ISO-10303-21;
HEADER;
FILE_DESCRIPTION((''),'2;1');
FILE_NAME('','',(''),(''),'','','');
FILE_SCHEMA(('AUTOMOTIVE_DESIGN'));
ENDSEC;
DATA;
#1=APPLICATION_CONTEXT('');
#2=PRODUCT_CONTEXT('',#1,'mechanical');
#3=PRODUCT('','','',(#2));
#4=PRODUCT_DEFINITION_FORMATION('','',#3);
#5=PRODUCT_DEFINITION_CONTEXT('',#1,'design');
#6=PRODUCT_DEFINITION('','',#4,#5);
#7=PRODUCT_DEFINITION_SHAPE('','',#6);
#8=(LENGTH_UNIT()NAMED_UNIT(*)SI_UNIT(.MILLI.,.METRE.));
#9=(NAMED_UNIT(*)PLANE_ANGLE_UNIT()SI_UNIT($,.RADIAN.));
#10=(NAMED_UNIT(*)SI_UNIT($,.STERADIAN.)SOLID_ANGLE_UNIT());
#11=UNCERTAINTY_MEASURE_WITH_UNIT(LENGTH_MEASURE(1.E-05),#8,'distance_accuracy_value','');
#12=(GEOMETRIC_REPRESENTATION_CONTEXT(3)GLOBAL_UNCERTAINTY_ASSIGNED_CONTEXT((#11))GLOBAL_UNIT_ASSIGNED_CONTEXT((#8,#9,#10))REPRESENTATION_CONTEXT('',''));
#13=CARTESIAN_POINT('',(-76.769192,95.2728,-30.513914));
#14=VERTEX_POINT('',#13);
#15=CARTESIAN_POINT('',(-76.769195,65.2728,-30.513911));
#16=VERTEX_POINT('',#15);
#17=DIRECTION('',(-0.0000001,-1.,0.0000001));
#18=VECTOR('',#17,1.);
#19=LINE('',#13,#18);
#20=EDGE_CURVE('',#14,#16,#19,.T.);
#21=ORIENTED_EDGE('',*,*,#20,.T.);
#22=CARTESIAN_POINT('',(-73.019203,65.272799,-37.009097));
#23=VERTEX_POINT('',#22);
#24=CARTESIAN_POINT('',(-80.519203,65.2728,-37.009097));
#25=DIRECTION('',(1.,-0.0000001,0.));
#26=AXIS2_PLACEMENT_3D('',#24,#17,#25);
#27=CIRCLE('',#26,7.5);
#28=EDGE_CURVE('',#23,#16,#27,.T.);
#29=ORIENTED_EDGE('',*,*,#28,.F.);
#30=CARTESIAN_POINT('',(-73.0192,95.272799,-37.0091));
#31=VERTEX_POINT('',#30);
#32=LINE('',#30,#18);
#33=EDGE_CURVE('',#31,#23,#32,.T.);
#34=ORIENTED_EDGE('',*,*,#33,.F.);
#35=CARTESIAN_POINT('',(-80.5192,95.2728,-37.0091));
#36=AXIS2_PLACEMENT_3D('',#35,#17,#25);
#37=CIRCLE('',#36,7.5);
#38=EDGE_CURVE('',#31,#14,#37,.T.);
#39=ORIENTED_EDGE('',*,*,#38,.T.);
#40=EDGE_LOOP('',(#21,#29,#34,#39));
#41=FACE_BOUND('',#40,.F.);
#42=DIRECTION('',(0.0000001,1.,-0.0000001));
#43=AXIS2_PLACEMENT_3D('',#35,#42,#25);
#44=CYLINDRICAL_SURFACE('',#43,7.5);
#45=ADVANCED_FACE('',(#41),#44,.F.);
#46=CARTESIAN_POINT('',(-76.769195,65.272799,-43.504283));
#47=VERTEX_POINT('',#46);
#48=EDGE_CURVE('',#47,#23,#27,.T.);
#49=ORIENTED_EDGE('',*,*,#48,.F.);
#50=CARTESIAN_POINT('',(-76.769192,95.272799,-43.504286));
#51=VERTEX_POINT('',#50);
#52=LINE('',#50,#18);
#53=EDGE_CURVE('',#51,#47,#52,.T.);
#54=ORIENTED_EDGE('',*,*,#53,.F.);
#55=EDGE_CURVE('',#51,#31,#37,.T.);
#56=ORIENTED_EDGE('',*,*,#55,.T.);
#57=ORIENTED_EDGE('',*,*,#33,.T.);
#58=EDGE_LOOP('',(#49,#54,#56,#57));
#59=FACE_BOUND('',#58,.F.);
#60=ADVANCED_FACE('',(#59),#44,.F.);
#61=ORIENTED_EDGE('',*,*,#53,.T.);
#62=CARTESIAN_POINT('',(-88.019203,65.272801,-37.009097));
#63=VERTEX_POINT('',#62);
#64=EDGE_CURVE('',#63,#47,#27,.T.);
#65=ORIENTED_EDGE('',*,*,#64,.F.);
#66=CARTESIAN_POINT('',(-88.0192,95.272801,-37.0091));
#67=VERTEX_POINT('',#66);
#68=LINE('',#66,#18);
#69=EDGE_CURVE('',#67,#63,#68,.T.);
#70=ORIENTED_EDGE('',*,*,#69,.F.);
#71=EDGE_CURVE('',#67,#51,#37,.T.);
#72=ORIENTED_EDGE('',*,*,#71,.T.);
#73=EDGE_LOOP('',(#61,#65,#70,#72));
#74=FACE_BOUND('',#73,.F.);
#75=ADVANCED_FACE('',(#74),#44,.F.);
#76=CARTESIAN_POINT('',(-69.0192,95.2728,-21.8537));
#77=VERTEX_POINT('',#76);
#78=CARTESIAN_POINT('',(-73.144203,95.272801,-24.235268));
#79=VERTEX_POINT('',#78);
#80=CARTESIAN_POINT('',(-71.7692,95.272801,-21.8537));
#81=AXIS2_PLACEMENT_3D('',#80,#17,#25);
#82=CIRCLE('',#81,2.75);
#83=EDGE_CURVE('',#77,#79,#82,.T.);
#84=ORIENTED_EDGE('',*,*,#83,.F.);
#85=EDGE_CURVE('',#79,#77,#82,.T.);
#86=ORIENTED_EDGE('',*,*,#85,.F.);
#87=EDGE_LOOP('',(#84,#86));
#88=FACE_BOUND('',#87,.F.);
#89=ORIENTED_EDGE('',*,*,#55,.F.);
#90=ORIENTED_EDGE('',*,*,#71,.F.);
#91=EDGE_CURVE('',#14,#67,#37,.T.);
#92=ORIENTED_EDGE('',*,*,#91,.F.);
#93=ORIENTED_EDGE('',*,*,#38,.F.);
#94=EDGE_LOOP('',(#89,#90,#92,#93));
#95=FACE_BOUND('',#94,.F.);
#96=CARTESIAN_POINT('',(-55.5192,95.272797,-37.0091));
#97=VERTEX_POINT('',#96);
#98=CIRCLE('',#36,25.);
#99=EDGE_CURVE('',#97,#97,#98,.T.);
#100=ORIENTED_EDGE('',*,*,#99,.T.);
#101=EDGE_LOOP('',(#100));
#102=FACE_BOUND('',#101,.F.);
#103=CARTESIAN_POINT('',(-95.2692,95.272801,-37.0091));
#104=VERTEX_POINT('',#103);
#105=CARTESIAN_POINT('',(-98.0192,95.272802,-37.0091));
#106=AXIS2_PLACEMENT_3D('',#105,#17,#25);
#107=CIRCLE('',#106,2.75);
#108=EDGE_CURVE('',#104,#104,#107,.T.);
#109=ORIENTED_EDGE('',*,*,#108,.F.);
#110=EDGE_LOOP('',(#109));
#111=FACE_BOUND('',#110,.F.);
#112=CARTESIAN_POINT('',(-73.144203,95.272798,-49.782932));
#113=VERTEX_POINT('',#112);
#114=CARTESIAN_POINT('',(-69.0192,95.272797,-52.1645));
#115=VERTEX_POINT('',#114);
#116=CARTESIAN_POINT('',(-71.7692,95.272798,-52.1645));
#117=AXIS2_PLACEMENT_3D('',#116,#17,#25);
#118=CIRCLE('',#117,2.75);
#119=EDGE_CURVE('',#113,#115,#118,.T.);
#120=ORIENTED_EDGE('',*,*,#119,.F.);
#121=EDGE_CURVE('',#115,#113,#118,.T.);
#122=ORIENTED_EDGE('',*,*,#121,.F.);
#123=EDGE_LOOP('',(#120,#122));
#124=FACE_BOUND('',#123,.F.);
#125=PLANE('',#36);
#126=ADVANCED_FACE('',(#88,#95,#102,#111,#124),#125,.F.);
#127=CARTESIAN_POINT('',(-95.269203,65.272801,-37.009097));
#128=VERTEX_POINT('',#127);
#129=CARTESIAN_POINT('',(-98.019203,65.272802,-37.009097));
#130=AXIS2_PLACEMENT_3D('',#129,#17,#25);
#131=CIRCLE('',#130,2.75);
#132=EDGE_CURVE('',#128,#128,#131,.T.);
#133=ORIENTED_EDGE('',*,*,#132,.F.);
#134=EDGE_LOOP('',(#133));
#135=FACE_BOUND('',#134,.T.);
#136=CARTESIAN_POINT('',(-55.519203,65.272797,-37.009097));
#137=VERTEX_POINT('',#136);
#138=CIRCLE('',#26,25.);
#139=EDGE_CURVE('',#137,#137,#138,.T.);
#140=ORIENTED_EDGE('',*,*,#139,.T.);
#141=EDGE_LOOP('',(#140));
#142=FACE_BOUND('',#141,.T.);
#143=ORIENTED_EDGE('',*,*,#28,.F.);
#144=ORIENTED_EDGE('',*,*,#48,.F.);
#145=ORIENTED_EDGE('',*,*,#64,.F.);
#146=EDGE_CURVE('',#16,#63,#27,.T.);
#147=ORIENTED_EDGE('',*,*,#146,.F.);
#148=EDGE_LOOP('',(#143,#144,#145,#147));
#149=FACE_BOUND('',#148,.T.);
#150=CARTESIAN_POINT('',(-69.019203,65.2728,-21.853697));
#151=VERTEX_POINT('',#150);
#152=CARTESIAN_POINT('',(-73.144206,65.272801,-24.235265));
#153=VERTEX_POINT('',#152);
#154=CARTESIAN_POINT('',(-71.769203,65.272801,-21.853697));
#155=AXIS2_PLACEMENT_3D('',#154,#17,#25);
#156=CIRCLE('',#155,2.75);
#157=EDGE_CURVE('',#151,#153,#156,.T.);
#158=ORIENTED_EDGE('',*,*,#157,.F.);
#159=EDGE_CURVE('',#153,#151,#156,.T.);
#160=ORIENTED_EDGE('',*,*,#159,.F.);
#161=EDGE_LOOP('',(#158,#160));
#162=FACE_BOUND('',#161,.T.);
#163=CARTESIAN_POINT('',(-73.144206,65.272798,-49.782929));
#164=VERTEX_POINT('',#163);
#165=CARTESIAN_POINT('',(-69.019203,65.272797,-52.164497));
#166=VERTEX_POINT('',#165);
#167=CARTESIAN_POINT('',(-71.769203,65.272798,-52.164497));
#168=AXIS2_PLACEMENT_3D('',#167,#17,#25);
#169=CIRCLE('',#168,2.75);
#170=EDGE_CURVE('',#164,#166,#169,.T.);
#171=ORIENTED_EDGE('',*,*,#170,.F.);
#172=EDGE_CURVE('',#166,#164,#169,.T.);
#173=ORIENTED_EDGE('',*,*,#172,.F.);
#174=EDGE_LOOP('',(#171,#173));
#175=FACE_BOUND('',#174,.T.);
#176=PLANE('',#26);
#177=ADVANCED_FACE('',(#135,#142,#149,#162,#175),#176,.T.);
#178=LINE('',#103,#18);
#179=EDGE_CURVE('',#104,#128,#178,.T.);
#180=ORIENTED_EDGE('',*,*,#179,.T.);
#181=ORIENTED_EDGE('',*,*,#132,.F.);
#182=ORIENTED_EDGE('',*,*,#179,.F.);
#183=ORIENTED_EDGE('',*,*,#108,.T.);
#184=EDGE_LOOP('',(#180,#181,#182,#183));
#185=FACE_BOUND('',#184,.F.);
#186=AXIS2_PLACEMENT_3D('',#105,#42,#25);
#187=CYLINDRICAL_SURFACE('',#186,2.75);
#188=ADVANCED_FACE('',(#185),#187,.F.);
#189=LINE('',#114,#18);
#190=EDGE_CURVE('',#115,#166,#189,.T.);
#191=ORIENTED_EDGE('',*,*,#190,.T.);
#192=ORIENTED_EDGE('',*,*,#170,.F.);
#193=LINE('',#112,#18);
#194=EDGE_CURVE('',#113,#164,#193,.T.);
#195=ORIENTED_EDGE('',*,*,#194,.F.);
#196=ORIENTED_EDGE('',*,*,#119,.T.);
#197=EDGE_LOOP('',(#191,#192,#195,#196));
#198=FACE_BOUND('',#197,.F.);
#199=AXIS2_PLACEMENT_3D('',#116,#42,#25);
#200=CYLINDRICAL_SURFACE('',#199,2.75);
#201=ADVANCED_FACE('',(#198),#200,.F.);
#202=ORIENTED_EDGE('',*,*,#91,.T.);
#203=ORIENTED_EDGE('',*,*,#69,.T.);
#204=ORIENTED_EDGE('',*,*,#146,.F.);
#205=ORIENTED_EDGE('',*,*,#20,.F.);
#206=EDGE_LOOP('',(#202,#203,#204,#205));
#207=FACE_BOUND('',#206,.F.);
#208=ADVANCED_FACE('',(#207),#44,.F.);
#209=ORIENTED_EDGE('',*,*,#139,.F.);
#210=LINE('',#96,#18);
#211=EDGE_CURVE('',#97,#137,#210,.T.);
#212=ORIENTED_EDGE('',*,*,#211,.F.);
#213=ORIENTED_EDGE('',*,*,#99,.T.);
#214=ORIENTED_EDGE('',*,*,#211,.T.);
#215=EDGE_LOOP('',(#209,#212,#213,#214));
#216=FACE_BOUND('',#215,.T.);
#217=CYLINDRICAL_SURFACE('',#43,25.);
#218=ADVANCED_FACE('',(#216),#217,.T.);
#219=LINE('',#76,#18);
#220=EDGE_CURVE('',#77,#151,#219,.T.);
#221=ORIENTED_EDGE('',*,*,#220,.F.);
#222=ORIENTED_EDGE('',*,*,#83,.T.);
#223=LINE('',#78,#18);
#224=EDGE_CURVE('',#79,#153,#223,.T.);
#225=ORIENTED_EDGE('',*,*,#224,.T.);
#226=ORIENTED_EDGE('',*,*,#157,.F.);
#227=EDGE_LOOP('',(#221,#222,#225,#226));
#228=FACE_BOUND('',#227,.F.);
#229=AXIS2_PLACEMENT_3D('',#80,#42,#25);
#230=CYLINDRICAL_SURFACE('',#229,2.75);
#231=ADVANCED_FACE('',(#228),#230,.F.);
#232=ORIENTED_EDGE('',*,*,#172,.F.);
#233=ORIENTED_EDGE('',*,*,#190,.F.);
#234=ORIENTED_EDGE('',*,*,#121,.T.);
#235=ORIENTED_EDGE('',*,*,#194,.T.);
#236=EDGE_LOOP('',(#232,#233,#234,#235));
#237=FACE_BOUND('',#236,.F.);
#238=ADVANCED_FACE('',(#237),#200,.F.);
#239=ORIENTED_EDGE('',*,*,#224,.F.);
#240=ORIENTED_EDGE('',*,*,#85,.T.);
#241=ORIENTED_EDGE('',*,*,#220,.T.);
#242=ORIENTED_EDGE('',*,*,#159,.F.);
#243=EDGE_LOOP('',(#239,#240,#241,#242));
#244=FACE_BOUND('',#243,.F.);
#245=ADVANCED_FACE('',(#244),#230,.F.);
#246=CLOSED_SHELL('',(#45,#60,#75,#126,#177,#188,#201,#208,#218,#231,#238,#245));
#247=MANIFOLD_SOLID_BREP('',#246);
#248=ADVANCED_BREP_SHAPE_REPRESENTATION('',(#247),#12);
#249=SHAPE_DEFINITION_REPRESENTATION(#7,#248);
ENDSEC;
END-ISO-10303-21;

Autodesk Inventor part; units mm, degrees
ref_plane "YZ Plane" through (0, 0, 0) normal (1, 0, 0) x (0, 1, 0)
ref_plane "XZ Plane" through (0, 0, 0) normal (0, 1, 0) x (-1, 0, 0)
ref_plane "XY Plane" through (0, 0, 0) normal (0, 0, 1) x (1, 0, 0)
ref_plane "Work Plane1" through (-80.5192, 95.2728, -37.0091) normal (-0.0000001, -1, 0.0000001) x (1, -0.0000001, 0)
sketch "Sketch1" plane through (-80.5192, 95.2728, -37.0091) normal (-0.0000001, -1, 0.0000001) x (1, -0.0000001, 0)
  circle A0 centre (0, 0) radius 25
  circle A1 centre (0, 0) radius 7.5
  circle A2 centre (8.75, -15.1554) radius 2.75
  circle A3 centre (8.75, 15.1554) radius 2.75
  circle A4 centre (-17.5, 0) radius 2.75
  line L0 (8.75, 15.1554) -> (0, 0)
  line L1 (0, 0) -> (8.75, -15.1554)
  line L2 (0, 0) -> (-17.5, 0)
  point P0 (80.5192, 37.0091)
  dimension "d0" = 50
  dimension "d1" = 15
extrude "Extrusion1" add sketch "Sketch1" along normal blind 30
properties part number "Pierścień"
